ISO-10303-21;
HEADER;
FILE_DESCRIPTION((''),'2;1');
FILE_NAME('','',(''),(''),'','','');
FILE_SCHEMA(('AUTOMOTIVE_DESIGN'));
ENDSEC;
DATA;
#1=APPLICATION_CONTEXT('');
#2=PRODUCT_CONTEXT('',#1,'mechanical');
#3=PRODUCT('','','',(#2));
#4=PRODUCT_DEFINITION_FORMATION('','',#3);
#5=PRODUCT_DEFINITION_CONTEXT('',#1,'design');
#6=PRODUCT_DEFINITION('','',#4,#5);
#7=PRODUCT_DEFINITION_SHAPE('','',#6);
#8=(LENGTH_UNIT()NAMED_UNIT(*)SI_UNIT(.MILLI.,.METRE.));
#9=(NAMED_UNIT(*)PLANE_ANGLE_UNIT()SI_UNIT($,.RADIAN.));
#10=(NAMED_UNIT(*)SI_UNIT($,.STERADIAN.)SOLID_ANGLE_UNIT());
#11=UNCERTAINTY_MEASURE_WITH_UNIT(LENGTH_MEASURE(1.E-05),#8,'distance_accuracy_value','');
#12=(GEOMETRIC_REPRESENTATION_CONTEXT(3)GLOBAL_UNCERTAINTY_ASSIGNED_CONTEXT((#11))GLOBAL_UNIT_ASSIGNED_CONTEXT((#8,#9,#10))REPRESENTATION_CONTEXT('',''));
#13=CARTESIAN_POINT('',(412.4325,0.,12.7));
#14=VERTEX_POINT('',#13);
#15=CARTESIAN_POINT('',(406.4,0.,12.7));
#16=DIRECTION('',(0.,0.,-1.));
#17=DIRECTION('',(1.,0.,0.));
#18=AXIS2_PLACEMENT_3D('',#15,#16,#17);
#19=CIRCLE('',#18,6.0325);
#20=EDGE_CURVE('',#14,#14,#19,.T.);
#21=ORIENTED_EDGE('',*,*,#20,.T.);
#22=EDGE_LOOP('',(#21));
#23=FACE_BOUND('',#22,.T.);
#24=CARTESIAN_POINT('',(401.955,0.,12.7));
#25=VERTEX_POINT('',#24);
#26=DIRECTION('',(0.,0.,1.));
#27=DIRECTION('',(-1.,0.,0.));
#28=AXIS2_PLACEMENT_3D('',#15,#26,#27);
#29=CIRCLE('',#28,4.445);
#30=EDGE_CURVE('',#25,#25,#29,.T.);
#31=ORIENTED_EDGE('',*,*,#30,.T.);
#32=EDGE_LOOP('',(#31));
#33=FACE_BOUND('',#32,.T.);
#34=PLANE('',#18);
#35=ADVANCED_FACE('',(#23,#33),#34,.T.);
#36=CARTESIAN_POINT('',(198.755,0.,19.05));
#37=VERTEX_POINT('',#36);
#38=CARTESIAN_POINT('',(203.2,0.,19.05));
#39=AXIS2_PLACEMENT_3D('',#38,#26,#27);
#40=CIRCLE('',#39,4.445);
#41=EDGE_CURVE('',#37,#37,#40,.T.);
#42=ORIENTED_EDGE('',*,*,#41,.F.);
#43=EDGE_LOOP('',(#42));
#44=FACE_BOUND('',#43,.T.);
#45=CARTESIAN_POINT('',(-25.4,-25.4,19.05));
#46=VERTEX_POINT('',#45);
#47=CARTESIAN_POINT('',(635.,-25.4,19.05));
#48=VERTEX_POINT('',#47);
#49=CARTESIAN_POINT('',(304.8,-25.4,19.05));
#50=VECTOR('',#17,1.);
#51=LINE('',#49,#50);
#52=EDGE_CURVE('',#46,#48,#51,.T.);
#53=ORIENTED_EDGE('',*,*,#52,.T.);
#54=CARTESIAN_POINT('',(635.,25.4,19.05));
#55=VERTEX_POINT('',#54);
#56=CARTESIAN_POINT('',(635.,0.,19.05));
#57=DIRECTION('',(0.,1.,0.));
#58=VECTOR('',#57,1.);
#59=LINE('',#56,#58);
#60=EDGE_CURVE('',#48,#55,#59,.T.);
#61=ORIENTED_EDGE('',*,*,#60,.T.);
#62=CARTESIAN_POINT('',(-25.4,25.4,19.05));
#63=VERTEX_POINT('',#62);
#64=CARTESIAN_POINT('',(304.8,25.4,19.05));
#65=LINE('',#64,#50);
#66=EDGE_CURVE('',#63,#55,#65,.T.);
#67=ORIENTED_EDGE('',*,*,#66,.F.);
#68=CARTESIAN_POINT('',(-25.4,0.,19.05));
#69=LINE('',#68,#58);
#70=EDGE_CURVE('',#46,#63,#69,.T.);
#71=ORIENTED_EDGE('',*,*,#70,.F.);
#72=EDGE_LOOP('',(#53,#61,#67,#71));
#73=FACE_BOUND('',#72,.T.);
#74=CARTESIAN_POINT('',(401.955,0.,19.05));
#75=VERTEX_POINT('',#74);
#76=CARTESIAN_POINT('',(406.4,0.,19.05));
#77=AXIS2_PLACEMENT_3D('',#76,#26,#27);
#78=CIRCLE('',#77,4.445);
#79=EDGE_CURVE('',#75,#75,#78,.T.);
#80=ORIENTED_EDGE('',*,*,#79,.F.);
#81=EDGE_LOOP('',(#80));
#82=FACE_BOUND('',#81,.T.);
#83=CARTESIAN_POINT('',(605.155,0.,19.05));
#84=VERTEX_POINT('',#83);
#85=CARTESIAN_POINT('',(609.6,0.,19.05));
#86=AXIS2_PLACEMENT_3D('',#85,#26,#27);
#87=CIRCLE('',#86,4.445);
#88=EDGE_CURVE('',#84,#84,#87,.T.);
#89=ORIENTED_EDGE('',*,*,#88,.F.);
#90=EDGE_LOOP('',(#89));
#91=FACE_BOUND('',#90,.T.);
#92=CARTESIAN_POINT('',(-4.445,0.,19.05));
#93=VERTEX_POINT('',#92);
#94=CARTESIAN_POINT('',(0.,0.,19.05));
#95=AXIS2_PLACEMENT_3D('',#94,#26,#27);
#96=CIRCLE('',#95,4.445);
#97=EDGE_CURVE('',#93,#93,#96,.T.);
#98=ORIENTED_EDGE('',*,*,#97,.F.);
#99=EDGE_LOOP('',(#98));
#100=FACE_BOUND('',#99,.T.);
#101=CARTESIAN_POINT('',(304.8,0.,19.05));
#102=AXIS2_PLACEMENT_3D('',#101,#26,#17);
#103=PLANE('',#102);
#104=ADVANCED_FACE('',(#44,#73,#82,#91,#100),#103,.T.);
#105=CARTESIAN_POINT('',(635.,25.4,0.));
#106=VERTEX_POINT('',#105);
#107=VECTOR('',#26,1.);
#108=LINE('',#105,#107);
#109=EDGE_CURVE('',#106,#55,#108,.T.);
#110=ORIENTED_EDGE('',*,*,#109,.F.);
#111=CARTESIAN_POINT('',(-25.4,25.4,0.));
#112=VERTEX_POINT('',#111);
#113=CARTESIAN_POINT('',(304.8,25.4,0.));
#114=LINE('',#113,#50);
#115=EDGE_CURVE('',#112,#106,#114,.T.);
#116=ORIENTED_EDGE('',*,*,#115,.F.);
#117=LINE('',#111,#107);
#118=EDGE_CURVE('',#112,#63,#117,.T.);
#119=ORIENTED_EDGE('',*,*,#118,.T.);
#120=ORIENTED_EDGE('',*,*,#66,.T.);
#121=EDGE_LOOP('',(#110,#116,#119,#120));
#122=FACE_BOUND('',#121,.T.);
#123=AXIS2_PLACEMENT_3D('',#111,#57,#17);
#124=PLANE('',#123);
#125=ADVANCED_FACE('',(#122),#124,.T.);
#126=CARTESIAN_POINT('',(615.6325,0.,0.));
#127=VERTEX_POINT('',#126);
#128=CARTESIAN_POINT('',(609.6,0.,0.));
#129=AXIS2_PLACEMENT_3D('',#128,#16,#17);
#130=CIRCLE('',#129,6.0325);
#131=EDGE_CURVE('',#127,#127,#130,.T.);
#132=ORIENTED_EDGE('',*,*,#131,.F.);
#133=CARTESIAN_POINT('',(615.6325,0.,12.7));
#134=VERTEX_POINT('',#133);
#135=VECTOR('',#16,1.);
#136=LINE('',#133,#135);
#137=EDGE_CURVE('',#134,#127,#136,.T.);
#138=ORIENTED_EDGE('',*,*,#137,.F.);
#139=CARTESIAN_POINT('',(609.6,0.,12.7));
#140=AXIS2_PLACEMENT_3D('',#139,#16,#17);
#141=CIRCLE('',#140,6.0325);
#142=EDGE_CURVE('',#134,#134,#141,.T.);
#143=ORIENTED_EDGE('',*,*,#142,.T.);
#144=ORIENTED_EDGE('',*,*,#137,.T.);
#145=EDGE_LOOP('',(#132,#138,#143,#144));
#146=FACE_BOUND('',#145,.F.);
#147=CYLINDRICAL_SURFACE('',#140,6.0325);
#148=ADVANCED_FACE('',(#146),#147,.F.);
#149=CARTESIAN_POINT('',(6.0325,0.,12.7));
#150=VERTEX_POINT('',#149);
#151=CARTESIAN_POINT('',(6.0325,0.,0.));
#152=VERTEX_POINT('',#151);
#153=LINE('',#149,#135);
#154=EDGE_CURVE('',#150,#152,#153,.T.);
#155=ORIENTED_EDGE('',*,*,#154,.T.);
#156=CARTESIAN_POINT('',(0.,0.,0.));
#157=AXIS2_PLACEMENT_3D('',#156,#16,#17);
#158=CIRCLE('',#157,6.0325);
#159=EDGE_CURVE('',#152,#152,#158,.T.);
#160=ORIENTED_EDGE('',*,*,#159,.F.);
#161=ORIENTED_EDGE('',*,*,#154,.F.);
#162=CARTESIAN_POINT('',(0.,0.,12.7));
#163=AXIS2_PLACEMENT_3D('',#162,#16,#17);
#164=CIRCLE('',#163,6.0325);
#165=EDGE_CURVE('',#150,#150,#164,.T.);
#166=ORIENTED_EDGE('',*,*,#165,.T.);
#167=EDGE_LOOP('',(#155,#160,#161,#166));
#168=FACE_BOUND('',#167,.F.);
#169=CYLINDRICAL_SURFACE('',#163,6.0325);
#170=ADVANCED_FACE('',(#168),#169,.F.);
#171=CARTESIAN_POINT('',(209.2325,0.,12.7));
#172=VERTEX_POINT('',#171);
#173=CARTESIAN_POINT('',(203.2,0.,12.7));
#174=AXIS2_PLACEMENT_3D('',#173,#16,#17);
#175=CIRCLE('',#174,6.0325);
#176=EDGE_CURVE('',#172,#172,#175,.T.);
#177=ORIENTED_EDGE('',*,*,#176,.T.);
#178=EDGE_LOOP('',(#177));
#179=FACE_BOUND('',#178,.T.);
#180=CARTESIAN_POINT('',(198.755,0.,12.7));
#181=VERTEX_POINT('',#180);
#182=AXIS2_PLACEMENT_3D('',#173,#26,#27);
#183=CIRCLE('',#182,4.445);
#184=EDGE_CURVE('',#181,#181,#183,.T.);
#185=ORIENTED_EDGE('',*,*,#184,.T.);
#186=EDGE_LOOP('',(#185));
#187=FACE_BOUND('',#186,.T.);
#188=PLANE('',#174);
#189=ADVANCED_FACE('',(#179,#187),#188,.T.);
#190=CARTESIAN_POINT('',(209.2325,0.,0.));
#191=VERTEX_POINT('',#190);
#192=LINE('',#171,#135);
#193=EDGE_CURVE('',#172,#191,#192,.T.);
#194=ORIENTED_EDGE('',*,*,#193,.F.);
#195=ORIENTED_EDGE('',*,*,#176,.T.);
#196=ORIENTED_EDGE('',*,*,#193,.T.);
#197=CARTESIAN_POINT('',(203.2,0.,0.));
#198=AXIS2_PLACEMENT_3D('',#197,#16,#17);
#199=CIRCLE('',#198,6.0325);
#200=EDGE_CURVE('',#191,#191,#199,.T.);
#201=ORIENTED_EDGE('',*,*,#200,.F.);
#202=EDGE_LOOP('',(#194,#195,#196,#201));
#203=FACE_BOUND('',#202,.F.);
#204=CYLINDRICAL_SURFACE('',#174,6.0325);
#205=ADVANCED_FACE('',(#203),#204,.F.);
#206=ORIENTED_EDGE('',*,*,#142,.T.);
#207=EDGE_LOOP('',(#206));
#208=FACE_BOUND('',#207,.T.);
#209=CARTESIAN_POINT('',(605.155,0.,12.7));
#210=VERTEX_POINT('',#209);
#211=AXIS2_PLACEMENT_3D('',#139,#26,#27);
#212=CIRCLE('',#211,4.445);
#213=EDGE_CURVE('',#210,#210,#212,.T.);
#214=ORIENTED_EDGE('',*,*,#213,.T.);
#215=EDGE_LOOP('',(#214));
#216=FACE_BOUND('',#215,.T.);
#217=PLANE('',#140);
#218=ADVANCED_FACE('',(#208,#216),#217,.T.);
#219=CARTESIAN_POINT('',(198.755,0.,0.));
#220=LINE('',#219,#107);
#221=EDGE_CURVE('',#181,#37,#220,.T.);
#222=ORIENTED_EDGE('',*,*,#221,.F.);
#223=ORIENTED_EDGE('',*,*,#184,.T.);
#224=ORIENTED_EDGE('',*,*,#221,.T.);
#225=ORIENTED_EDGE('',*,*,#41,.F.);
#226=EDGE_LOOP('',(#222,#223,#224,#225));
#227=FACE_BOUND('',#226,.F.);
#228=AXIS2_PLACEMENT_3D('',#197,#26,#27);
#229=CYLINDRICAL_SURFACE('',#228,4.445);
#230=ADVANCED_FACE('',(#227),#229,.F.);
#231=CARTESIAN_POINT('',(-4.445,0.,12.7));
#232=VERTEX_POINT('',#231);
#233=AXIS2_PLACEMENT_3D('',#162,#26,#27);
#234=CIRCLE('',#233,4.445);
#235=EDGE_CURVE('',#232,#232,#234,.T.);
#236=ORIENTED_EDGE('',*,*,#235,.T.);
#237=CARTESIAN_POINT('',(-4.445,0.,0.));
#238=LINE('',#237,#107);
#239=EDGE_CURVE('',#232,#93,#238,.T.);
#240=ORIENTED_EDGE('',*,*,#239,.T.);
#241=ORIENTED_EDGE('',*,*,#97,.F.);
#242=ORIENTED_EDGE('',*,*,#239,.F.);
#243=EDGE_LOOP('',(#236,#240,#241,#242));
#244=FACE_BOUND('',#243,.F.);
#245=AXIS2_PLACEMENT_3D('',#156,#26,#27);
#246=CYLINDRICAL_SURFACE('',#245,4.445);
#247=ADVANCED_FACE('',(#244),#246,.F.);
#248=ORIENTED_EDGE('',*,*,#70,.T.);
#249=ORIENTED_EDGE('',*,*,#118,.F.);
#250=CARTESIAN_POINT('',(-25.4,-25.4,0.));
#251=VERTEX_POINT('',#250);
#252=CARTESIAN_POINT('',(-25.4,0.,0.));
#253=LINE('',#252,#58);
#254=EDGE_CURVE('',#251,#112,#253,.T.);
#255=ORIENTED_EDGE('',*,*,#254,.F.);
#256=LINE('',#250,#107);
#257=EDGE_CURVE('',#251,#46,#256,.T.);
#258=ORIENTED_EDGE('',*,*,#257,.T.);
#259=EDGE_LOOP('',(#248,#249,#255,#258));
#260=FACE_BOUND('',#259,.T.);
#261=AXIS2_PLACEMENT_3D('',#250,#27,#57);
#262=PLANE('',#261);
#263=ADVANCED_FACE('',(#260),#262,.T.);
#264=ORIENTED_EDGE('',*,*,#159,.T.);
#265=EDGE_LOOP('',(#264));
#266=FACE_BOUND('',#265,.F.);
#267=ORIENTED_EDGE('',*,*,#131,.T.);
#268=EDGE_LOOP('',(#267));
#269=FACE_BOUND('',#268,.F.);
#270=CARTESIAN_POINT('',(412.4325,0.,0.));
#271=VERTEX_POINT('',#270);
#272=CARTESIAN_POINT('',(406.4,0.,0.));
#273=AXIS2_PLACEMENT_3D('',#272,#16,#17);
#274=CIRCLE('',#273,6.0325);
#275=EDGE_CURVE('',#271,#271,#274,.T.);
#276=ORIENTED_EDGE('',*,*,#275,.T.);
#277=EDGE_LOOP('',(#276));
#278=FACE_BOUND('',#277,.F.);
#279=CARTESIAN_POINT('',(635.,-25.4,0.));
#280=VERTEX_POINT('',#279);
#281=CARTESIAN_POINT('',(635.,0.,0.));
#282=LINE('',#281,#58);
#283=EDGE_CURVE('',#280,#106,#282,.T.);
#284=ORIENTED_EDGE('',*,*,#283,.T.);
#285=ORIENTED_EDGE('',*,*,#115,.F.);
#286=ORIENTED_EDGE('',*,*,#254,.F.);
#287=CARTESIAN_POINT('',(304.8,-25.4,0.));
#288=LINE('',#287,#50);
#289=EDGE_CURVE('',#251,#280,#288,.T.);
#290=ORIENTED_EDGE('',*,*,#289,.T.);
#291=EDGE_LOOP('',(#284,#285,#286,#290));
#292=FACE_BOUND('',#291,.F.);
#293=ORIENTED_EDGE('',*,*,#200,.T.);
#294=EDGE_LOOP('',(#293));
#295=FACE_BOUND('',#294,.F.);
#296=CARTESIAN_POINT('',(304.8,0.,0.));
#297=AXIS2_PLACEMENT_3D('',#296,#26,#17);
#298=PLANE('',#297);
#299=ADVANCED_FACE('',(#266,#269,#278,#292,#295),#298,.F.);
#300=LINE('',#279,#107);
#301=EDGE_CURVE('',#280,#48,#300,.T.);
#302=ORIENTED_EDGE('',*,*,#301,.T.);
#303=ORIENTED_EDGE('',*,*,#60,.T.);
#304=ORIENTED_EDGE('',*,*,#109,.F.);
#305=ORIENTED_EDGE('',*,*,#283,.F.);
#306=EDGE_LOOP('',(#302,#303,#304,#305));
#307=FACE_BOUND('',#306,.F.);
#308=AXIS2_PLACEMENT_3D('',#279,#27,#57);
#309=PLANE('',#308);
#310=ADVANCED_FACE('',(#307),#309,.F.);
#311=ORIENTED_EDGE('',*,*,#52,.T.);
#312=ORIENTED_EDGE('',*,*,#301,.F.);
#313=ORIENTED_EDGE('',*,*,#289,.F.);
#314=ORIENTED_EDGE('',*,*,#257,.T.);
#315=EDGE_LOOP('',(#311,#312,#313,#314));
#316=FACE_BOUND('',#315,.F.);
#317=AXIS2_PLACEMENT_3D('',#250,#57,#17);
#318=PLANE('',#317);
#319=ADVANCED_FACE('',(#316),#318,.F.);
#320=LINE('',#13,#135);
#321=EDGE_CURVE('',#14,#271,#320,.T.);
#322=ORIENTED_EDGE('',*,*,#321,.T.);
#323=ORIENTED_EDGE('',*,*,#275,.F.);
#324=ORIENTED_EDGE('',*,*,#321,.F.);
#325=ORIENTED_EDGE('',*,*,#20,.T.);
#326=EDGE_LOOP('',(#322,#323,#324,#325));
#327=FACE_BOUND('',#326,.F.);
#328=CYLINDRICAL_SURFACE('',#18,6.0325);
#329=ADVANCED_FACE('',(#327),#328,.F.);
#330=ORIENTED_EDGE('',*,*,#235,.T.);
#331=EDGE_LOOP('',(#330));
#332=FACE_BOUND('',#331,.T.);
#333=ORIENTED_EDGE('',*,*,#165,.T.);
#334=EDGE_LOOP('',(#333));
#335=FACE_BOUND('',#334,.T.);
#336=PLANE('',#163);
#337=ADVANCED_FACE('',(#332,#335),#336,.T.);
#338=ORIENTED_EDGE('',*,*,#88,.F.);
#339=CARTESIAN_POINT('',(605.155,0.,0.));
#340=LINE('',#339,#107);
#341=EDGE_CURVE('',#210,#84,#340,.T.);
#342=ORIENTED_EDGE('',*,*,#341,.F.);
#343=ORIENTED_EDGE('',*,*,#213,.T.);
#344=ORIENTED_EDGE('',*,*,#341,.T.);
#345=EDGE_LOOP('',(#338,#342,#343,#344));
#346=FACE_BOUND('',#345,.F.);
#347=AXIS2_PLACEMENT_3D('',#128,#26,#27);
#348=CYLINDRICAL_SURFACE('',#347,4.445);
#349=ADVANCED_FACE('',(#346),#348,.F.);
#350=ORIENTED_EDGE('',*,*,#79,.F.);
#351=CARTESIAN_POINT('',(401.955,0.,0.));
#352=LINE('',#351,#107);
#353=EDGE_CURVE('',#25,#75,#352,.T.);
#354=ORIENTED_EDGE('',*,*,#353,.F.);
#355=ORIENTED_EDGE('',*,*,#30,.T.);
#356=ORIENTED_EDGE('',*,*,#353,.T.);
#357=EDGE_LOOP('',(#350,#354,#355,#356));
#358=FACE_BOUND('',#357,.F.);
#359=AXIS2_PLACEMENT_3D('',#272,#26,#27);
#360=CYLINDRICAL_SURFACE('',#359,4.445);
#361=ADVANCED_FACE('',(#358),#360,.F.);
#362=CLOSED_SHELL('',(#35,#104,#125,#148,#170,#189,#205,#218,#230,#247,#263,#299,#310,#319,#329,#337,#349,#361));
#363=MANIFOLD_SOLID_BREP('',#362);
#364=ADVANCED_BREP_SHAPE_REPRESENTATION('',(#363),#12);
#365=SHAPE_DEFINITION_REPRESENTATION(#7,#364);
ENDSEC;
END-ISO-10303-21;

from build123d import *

# Parameters (mm, degrees)
F0_W           = 660.4
F0_H           = 50.8
F1_DEPTH       = 19.05
F2_D           = 8.89
F2_CBORE_D     = 12.065
F2_CBORE_DEPTH = 12.7


# Not quite as in the source:
# - a length typed as a fraction of an inch, garbled in the dataset ("3 / 203.2 mm" for 3/8 in), is restored


with BuildPart() as f1:
    # F0 (on Top) → F1 (new body)
    with BuildSketch(Plane.XY):
        with Locations((304.8, 0)):
            Rectangle(F0_W, F0_H)
    extrude(amount=F1_DEPTH)

    # F2 (through all)
    with Locations(Plane(origin=(0, 0, 0), x_dir=(1, 0, 0), z_dir=(0, 0, -1))):
        with Locations((0, 0), (203.2, 0), (406.4, 0), (609.6, 0)):
            CounterBoreHole(F2_D / 2, F2_CBORE_D / 2, F2_CBORE_DEPTH)


solid = f1.part
